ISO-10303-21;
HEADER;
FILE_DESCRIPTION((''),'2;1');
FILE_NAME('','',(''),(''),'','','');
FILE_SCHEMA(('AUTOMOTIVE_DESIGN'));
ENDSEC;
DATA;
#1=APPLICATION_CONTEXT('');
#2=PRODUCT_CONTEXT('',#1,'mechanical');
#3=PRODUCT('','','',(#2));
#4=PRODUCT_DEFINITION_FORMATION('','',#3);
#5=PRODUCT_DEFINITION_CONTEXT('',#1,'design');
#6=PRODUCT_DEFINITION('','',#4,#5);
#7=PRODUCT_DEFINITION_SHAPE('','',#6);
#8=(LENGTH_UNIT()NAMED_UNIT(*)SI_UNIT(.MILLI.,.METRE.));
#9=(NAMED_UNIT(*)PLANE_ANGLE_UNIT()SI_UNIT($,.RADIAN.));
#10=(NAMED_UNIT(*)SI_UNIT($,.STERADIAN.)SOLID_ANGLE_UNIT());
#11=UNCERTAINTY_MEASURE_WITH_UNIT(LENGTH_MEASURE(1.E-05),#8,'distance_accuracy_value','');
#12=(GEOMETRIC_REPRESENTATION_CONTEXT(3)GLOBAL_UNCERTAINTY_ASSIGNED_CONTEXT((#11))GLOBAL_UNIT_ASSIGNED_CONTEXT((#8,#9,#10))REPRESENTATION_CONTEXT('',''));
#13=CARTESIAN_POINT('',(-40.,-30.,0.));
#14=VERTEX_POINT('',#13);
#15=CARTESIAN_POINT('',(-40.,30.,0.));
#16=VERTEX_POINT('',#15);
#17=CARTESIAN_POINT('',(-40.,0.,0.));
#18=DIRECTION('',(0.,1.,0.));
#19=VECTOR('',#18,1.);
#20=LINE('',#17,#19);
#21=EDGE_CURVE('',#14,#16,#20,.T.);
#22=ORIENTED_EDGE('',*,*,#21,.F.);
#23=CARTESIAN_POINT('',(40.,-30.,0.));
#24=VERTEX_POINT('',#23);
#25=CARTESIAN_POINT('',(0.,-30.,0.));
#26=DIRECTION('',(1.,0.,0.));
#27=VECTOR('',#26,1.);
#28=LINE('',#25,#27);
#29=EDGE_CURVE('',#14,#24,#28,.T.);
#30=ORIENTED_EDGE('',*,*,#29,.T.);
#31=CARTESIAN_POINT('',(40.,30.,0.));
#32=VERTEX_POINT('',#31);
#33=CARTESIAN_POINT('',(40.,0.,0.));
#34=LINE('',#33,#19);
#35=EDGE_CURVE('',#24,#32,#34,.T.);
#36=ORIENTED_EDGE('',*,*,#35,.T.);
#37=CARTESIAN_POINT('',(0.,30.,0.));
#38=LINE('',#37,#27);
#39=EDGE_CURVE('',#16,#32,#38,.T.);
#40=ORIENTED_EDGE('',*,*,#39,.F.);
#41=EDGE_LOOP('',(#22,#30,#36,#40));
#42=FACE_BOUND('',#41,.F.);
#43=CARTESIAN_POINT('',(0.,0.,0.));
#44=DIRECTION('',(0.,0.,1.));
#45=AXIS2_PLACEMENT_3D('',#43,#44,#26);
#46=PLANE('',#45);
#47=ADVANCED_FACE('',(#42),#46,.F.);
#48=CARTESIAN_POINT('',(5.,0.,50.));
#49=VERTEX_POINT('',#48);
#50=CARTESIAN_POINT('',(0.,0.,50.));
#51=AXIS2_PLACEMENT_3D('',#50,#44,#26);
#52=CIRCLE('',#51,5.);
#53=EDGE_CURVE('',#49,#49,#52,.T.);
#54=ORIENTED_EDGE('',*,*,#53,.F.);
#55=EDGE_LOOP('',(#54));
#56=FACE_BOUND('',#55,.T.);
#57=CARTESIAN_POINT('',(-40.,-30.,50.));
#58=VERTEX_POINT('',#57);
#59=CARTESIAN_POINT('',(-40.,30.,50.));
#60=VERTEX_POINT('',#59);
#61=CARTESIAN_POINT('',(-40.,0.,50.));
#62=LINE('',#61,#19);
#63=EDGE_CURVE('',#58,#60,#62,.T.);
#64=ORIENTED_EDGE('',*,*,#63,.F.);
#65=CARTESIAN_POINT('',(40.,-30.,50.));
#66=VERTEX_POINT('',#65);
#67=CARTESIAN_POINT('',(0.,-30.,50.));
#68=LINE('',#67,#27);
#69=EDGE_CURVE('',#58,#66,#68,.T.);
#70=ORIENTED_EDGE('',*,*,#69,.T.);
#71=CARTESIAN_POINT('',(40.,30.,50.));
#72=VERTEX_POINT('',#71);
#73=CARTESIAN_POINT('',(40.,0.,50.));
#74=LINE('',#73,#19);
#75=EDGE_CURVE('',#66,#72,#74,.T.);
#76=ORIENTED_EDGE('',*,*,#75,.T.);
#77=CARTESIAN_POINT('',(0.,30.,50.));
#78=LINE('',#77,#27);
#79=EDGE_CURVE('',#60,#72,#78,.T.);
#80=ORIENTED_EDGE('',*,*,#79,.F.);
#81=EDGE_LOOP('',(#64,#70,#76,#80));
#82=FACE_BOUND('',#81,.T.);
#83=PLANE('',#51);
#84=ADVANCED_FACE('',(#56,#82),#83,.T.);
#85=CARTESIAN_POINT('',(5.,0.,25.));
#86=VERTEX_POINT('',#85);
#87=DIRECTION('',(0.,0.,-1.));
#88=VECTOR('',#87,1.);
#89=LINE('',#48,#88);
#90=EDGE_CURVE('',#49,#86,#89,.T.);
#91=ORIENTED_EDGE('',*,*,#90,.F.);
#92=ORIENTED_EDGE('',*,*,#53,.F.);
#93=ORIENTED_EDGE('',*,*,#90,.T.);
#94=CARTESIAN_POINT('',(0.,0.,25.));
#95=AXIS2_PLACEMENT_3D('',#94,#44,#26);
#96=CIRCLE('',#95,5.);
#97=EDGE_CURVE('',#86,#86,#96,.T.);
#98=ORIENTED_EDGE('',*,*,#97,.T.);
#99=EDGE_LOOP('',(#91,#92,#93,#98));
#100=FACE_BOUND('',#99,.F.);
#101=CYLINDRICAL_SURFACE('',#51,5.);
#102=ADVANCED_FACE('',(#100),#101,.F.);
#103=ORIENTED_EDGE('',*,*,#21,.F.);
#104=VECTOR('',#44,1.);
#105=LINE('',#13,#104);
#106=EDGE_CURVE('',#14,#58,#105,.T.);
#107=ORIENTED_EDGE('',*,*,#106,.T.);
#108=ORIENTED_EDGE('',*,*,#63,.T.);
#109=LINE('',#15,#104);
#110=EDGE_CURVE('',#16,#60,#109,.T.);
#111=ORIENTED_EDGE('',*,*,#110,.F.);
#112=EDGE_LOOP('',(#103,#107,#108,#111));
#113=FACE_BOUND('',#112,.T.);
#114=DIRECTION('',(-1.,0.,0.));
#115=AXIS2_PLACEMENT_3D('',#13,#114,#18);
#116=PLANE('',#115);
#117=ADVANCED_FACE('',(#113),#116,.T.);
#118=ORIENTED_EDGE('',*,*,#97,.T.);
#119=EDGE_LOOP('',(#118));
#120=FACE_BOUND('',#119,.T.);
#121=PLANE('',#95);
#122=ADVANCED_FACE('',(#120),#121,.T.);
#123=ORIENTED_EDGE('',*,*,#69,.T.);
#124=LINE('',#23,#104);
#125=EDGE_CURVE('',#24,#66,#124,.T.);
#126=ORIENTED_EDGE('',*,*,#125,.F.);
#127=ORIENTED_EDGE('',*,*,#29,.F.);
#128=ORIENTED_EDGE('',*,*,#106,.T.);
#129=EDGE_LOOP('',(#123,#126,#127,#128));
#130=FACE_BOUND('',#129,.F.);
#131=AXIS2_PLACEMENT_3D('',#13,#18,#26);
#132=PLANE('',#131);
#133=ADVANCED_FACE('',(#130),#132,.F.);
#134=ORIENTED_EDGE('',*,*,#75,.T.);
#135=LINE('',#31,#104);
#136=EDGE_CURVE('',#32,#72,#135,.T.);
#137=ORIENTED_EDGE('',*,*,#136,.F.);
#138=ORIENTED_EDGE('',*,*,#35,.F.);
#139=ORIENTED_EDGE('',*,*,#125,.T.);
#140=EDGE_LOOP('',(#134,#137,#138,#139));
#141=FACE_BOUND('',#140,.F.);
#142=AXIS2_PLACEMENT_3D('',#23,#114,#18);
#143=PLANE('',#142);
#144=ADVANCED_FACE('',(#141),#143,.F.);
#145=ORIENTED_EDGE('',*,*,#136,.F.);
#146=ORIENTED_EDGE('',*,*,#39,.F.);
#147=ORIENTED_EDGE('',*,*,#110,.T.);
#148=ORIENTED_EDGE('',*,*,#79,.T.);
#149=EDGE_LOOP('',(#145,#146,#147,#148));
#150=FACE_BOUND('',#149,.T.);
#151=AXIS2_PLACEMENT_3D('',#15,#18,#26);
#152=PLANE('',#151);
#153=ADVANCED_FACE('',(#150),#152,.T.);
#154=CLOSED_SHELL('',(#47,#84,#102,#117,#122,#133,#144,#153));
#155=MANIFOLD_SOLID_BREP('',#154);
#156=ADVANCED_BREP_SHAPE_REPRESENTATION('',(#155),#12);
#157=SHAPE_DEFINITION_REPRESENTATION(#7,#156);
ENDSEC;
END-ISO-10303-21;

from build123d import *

# Parameters (mm, degrees)
F0_W     = 80
F0_H     = 60
F1_DEPTH = 50
F2_R     = 5
F3_DEPTH = 25


# Not quite as in the source:
# - a feature names something its author has since deleted; it is built from what else it names


with BuildPart() as f1:
    # F0 (on Top) → F1 (new body)
    with BuildSketch(Plane.XY):
        Rectangle(F0_W, F0_H)
    extrude(amount=F1_DEPTH)

    # F2 (on face) → F3 (cut)
    with BuildSketch(Plane.XY.offset(50)):
        Circle(F2_R)
    extrude(amount=-F3_DEPTH, mode=Mode.SUBTRACT)


solid = f1.part
